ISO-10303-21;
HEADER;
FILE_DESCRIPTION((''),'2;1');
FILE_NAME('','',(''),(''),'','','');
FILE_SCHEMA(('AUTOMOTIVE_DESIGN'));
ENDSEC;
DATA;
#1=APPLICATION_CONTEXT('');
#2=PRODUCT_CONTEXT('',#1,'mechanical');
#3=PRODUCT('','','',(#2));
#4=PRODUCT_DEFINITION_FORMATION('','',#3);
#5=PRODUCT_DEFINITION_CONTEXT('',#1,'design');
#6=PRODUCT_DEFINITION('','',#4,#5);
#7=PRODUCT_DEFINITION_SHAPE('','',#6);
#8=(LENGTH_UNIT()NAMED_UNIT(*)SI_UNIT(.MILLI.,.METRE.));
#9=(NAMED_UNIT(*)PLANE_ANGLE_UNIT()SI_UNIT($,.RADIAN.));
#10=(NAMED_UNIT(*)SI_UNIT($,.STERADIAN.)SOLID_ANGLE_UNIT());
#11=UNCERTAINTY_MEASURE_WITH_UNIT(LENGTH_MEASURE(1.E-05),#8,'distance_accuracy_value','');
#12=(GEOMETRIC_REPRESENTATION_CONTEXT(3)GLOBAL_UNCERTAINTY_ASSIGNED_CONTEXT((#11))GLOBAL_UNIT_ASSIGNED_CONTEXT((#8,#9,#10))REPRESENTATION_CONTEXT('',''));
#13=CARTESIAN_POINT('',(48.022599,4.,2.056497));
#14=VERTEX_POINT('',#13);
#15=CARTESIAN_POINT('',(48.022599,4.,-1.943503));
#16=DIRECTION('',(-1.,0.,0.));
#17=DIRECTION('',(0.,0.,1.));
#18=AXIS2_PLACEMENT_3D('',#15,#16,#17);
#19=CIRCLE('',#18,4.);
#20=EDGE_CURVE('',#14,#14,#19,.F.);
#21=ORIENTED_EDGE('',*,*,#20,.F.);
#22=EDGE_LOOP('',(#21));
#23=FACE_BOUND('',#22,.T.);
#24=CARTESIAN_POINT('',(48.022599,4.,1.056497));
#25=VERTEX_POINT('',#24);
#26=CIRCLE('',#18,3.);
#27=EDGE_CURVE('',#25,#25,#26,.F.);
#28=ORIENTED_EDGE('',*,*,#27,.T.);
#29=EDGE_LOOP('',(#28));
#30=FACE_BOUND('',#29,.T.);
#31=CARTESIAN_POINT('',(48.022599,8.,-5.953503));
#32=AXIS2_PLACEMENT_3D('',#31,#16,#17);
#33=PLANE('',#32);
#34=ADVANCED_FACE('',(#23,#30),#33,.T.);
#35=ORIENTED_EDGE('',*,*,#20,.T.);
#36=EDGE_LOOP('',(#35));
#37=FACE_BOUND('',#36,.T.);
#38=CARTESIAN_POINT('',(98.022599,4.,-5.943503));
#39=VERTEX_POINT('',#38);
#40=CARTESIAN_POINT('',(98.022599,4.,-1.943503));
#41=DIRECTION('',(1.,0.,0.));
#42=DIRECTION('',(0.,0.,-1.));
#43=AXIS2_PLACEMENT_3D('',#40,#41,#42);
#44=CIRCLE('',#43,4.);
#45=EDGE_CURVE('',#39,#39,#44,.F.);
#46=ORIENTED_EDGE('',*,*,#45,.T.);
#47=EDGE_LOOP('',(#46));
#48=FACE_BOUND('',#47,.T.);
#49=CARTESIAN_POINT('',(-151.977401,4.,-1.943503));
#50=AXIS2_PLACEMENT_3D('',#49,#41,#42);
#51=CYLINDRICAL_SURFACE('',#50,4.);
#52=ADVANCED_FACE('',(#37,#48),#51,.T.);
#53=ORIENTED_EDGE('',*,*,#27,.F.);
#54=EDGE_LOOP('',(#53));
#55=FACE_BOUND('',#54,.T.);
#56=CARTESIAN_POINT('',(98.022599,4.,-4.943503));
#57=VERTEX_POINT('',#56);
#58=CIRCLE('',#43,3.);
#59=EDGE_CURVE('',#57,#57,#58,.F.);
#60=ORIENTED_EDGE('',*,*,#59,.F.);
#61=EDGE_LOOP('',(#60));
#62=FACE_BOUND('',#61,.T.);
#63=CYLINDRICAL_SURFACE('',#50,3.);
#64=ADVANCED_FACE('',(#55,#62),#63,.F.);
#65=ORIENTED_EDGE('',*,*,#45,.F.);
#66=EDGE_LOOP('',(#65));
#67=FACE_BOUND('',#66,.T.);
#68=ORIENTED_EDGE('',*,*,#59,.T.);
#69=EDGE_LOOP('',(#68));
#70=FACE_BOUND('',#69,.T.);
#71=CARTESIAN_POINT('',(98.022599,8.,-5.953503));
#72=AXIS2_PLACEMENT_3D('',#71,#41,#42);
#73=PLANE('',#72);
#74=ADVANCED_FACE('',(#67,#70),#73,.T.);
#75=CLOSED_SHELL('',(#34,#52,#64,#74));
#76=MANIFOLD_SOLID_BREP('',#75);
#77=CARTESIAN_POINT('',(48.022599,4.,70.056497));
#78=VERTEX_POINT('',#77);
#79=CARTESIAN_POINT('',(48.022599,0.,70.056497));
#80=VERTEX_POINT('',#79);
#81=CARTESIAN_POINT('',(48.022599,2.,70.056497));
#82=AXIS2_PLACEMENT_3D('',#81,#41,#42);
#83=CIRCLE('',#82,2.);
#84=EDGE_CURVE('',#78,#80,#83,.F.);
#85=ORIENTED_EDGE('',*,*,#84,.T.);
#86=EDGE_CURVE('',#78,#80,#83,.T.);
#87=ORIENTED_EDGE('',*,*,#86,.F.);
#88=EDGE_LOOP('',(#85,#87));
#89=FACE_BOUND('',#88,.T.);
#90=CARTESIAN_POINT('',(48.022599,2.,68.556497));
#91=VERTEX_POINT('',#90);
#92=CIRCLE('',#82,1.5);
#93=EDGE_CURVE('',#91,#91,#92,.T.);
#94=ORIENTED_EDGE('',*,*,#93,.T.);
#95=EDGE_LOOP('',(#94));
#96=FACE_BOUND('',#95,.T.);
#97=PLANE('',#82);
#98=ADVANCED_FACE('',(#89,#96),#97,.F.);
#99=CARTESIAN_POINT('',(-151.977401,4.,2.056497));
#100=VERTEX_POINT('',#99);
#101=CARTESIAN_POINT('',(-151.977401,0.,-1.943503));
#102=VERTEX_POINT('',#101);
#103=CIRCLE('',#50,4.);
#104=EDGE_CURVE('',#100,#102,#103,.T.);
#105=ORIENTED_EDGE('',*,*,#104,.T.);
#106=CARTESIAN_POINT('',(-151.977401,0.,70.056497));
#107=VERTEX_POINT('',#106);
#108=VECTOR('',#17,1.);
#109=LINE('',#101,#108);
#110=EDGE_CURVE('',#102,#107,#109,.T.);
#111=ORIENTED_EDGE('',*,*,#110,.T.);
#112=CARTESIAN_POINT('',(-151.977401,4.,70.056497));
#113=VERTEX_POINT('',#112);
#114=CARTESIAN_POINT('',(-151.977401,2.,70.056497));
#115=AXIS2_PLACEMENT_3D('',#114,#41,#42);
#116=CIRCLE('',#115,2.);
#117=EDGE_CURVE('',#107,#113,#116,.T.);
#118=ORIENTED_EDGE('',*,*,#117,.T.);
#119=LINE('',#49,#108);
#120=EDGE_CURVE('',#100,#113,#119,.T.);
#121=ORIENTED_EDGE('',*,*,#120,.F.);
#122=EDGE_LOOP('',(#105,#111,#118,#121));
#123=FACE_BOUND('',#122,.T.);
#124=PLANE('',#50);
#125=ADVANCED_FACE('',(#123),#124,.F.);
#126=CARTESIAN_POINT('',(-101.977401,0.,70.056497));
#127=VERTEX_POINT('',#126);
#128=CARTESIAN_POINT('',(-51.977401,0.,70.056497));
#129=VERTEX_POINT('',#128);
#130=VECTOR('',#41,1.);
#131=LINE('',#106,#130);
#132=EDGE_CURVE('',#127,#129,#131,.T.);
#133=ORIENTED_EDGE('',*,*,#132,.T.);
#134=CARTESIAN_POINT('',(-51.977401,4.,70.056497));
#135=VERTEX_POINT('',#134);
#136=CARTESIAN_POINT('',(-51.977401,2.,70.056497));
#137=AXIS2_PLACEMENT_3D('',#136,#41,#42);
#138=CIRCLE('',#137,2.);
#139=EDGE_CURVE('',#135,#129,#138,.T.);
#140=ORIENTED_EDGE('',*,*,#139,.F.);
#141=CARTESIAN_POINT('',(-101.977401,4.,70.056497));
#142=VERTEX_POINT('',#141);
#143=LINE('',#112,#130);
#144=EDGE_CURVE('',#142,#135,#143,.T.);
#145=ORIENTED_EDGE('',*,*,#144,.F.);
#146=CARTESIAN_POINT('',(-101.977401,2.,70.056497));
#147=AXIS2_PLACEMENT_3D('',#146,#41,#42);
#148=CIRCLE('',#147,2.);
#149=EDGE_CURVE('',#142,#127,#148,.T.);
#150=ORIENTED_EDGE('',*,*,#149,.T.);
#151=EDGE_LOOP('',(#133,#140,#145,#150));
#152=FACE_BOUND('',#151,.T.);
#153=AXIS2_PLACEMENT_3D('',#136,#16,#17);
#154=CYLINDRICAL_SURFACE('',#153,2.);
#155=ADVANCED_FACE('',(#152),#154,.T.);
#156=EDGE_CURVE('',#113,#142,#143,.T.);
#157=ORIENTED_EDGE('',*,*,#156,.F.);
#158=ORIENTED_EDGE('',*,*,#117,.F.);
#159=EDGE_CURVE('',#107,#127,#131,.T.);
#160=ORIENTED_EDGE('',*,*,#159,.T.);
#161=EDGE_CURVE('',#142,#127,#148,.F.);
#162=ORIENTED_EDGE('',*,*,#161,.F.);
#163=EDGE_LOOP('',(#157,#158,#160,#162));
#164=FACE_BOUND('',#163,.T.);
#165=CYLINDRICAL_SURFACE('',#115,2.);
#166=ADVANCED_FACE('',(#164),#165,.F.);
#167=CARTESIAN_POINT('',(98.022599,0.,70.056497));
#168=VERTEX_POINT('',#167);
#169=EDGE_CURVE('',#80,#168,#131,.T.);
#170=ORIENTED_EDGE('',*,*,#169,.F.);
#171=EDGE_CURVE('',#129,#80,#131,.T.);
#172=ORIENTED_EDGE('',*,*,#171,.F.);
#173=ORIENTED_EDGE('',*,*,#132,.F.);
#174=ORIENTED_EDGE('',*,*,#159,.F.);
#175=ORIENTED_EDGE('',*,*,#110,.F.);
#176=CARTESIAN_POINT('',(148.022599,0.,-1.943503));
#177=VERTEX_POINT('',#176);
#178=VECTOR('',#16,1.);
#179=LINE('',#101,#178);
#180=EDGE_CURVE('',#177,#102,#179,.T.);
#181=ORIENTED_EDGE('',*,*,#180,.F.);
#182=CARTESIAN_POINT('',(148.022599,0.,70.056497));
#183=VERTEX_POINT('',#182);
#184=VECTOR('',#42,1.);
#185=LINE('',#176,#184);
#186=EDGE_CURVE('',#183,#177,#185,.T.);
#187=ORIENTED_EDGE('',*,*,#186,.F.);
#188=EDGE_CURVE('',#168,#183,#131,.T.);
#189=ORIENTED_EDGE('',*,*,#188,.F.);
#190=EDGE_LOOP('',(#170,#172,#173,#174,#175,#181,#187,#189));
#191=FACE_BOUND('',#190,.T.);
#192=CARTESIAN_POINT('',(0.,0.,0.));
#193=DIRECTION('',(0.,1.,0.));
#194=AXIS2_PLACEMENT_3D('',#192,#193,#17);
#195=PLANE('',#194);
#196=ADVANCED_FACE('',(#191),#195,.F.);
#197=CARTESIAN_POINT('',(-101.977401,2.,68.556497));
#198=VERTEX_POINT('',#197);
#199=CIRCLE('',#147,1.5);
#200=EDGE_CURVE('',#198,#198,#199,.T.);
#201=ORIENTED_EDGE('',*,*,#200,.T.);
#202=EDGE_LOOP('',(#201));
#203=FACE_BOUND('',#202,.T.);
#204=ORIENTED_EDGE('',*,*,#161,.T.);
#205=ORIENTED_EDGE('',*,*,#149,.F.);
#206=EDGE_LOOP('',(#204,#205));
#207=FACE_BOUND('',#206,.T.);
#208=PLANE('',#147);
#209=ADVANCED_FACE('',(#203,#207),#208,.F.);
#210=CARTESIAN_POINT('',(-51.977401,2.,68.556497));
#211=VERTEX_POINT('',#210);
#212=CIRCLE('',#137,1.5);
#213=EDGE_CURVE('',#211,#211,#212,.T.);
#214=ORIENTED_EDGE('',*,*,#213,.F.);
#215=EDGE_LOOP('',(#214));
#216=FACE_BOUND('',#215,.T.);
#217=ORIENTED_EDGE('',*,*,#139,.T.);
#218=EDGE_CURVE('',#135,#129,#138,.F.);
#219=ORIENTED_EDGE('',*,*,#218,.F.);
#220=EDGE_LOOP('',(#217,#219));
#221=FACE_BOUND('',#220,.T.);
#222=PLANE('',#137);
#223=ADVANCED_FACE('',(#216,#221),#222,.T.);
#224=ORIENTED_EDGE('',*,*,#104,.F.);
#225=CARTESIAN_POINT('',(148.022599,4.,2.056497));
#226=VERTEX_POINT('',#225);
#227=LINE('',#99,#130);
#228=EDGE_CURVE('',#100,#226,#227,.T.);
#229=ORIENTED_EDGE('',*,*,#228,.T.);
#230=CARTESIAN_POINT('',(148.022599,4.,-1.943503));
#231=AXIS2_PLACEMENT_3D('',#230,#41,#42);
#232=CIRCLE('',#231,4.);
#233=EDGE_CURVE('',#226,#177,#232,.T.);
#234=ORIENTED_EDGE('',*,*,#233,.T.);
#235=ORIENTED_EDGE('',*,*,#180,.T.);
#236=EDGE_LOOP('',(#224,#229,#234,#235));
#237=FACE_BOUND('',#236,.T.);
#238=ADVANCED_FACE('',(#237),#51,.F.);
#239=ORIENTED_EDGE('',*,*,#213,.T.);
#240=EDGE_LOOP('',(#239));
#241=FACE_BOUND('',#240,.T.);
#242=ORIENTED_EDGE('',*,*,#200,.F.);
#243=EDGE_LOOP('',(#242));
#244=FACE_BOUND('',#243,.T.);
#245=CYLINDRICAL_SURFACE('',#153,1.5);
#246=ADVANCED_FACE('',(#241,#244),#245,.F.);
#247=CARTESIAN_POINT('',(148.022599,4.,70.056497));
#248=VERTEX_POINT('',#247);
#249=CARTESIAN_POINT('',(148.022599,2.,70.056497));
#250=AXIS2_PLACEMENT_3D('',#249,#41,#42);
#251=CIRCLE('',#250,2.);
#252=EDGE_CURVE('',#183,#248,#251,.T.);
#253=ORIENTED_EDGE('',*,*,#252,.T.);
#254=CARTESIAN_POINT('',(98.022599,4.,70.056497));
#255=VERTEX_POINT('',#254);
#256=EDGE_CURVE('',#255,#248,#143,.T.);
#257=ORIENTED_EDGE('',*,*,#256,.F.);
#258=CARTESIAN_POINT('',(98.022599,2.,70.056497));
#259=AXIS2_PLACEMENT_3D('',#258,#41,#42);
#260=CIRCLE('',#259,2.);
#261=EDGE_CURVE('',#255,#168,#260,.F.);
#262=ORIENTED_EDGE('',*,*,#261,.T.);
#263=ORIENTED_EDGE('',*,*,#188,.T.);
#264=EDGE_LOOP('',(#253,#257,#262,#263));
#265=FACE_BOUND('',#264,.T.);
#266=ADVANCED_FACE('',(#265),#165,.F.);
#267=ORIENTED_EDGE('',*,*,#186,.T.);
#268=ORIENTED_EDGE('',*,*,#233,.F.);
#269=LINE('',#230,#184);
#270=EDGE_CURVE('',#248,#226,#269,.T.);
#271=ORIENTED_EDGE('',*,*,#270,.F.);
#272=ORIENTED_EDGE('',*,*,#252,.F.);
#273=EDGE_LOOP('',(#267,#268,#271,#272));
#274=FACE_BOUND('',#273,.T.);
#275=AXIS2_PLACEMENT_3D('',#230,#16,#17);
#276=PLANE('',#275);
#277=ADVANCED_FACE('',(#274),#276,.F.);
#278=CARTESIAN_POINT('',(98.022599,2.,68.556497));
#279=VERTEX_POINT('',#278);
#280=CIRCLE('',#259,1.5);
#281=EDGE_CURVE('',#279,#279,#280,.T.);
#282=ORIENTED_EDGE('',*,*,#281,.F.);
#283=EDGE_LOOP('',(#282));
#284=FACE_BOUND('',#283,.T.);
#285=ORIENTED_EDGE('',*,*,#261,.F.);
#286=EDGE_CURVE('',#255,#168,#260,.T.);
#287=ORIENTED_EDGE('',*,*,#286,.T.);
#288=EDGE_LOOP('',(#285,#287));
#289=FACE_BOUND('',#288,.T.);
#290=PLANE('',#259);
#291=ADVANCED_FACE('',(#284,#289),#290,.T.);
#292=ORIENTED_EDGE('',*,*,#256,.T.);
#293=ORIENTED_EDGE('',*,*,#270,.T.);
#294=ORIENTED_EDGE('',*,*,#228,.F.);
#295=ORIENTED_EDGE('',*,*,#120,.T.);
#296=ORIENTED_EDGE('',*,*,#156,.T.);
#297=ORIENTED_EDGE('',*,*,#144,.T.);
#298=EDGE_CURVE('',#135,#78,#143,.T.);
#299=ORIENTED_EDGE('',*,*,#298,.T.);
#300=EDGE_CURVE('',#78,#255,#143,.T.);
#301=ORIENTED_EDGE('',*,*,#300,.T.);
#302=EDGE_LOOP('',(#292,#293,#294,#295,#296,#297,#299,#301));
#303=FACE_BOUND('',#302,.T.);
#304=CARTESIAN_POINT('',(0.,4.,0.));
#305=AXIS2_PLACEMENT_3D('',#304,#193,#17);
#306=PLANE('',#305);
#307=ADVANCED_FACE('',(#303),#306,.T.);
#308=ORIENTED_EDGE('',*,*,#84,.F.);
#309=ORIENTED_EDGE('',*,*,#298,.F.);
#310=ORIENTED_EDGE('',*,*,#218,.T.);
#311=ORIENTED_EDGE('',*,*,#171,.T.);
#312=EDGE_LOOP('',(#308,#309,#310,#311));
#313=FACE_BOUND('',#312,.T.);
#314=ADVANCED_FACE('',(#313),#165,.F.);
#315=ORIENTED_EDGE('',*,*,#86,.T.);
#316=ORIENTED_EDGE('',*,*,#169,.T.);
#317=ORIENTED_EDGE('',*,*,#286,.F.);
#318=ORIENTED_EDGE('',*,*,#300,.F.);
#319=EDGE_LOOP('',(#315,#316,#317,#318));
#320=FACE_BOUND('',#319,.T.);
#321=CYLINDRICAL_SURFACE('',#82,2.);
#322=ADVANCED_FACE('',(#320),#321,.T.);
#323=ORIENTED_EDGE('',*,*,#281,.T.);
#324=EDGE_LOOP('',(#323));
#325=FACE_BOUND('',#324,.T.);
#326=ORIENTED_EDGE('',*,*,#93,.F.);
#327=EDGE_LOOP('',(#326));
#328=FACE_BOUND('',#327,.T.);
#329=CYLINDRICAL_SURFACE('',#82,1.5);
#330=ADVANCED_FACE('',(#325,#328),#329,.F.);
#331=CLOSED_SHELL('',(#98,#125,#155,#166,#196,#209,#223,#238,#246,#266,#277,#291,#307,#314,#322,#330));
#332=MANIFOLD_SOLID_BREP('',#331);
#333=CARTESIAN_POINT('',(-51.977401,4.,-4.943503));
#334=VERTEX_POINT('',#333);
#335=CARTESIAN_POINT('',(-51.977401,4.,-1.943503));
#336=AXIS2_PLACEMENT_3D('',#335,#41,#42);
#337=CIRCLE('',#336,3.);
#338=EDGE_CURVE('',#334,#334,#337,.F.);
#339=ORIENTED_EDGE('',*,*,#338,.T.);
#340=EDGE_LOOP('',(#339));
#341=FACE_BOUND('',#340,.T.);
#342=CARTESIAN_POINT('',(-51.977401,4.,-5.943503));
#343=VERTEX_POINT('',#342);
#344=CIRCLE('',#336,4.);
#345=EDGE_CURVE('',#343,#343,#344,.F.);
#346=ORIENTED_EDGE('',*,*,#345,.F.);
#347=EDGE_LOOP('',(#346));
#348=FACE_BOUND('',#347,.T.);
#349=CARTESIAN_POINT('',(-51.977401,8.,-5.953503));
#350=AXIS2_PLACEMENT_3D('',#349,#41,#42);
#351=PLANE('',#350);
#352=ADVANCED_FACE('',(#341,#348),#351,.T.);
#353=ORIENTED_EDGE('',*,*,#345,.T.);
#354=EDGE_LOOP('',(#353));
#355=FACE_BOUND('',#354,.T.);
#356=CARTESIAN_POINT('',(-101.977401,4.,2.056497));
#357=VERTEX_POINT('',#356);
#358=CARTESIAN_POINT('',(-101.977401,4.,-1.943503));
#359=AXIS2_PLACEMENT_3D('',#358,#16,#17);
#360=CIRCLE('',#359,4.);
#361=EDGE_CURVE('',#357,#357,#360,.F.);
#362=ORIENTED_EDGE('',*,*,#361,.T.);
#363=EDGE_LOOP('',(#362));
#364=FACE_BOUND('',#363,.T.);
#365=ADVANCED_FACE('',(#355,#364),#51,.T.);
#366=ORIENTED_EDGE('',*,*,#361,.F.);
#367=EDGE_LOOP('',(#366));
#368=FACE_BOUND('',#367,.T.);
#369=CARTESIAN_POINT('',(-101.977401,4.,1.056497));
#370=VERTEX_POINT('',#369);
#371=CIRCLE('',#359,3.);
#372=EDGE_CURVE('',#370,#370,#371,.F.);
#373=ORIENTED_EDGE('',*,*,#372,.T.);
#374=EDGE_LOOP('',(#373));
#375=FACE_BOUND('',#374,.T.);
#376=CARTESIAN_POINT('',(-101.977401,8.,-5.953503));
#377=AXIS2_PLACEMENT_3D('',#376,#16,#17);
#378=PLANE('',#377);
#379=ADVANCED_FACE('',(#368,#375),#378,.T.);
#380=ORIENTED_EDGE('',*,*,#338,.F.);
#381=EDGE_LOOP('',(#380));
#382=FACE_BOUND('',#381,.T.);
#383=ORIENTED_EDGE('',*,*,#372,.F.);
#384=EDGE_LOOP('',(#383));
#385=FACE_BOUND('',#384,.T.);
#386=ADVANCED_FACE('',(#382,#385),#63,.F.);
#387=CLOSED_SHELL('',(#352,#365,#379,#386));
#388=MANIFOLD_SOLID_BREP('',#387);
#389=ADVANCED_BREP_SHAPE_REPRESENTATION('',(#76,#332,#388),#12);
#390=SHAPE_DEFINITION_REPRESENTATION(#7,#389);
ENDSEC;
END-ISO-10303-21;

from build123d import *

# Parameters (mm, degrees)
SKETCH_1_W                   = 300
SKETCH_1_H                   = 72
EXTRUDE_1_DEPTH              = 4
SKETCH_2_R                   = 4
CUT_EXTRUDE_1_DEPTH          = 300
SKETCH_3_R                   = 4
SKETCH_3_R_2                 = 3
EXTRUDE_1_2_DEPTH            = 300
SPLIT_START                  = -51.97740113
SPLIT_BODIES_1_OUTLINE_R     = 4
SPLIT_BODIES_1_OUTLINE_R_2   = 3
SPLIT_BODIES_1_DEPTH         = 100
SPLIT_START_2                = -151.97740113
SPLIT_BODIES_1_2_OUTLINE_R   = 4
SPLIT_BODIES_1_2_OUTLINE_R_2 = 3
SPLIT_BODIES_1_2_DEPTH       = 50
SPLIT_START_3                = 98.02259887
SPLIT_BODIES_1_3_OUTLINE_R   = 4
SPLIT_BODIES_1_3_OUTLINE_R_2 = 3
SPLIT_BODIES_1_3_DEPTH       = 50
SKETCH_7_R                   = 2
CUT_EXTRUDE_2_DEPTH          = 309.175133319
EXTRUDE_START                = 50
SKETCH_8_R                   = 2
SKETCH_8_R_2                 = 1.5
EXTRUDE_3_DEPTH              = 50
SKETCH_10_R                  = 2
SKETCH_10_R_2                = 1.5
EXTRUDE_4_DEPTH              = 50


# Read off the part's stored shape, not the designer's step: 分割1
with BuildPart() as part:
    # 草图1 → Extrude 1 (new body)
    with BuildSketch(Plane(origin=(0, 0, 0), x_dir=(1, 0, 0), z_dir=(0, 1, 0))):
        with Locations((-1.97740113, -34.056497175)):
            Rectangle(SKETCH_1_W, SKETCH_1_H)
    extrude(amount=EXTRUDE_1_DEPTH)

    # 草图2 → 切除-拉伸1 (cut)
    with BuildSketch(Plane(origin=(148.02259887, 0, 0), x_dir=(0, 0, -1), z_dir=(1, 0, 0))):
        with Locations((1.943502825, 4)):
            Circle(SKETCH_2_R)
    extrude(amount=-CUT_EXTRUDE_1_DEPTH, mode=Mode.SUBTRACT)

    # 草图7 → 切除-拉伸2 (cut, through all)
    with BuildSketch(Plane(origin=(148.02259887, 0, 0), x_dir=(0, 0, -1), z_dir=(1, 0, 0))):
        with Locations((-70.056497175, 2)):
            Circle(SKETCH_7_R)
    extrude(amount=-CUT_EXTRUDE_2_DEPTH, mode=Mode.SUBTRACT)

    # 草图8 → 拉伸-薄壁3 (add)
    with BuildSketch(Plane(origin=(-101.97740113, 0, 0), x_dir=(0, 0, -1), z_dir=(1, 0, 0)).offset(EXTRUDE_START)):
        with Locations((-70.056497175, 2)):
            Circle(SKETCH_8_R)
        with Locations((-70.056497175, 2)):
            Circle(SKETCH_8_R_2, mode=Mode.SUBTRACT)
    extrude(amount=-EXTRUDE_3_DEPTH)

    # 草图10 → 拉伸-薄壁4 (add)
    with BuildSketch(Plane(origin=(98.02259887, 0, 0), x_dir=(0, 0, -1), z_dir=(1, 0, 0))):
        with Locations((-70.056497175, 2)):
            Circle(SKETCH_10_R)
        with Locations((-70.056497175, 2)):
            Circle(SKETCH_10_R_2, mode=Mode.SUBTRACT)
    extrude(amount=-EXTRUDE_4_DEPTH)


with BuildPart() as body_2:
    # 草图3 → Extrude 1 2 (new body)
    with BuildSketch(Plane(origin=(148.02259887, 0, 0), x_dir=(0, 0, -1), z_dir=(1, 0, 0))):
        with Locations((1.943502825, 4)):
            Circle(SKETCH_3_R)
        with Locations((1.943502825, 4)):
            Circle(SKETCH_3_R_2, mode=Mode.SUBTRACT)
    extrude(amount=-EXTRUDE_1_2_DEPTH)

    # Split Bodies 1 outline → Split Bodies 1 (cut)
    with BuildSketch(Plane.YZ.offset(SPLIT_START)):
        with Locations((4, -1.943502825)):
            Circle(SPLIT_BODIES_1_OUTLINE_R)
        with Locations((4, -1.943502825)):
            Circle(SPLIT_BODIES_1_OUTLINE_R_2, mode=Mode.SUBTRACT)
    extrude(amount=SPLIT_BODIES_1_DEPTH, mode=Mode.SUBTRACT)

    # Split Bodies 1 2 outline → Split Bodies 1 2 (cut)
    with BuildSketch(Plane.YZ.offset(SPLIT_START_2)):
        with Locations((4, -1.943502825)):
            Circle(SPLIT_BODIES_1_2_OUTLINE_R)
        with Locations((4, -1.943502825)):
            Circle(SPLIT_BODIES_1_2_OUTLINE_R_2, mode=Mode.SUBTRACT)
    extrude(amount=SPLIT_BODIES_1_2_DEPTH, mode=Mode.SUBTRACT)

    # Split Bodies 1 3 outline → Split Bodies 1 3 (cut)
    with BuildSketch(Plane.YZ.offset(SPLIT_START_3)):
        with Locations((4, -1.943502825)):
            Circle(SPLIT_BODIES_1_3_OUTLINE_R)
        with Locations((4, -1.943502825)):
            Circle(SPLIT_BODIES_1_3_OUTLINE_R_2, mode=Mode.SUBTRACT)
    extrude(amount=SPLIT_BODIES_1_3_DEPTH, mode=Mode.SUBTRACT)


solid = Compound([part.part, body_2.part])
